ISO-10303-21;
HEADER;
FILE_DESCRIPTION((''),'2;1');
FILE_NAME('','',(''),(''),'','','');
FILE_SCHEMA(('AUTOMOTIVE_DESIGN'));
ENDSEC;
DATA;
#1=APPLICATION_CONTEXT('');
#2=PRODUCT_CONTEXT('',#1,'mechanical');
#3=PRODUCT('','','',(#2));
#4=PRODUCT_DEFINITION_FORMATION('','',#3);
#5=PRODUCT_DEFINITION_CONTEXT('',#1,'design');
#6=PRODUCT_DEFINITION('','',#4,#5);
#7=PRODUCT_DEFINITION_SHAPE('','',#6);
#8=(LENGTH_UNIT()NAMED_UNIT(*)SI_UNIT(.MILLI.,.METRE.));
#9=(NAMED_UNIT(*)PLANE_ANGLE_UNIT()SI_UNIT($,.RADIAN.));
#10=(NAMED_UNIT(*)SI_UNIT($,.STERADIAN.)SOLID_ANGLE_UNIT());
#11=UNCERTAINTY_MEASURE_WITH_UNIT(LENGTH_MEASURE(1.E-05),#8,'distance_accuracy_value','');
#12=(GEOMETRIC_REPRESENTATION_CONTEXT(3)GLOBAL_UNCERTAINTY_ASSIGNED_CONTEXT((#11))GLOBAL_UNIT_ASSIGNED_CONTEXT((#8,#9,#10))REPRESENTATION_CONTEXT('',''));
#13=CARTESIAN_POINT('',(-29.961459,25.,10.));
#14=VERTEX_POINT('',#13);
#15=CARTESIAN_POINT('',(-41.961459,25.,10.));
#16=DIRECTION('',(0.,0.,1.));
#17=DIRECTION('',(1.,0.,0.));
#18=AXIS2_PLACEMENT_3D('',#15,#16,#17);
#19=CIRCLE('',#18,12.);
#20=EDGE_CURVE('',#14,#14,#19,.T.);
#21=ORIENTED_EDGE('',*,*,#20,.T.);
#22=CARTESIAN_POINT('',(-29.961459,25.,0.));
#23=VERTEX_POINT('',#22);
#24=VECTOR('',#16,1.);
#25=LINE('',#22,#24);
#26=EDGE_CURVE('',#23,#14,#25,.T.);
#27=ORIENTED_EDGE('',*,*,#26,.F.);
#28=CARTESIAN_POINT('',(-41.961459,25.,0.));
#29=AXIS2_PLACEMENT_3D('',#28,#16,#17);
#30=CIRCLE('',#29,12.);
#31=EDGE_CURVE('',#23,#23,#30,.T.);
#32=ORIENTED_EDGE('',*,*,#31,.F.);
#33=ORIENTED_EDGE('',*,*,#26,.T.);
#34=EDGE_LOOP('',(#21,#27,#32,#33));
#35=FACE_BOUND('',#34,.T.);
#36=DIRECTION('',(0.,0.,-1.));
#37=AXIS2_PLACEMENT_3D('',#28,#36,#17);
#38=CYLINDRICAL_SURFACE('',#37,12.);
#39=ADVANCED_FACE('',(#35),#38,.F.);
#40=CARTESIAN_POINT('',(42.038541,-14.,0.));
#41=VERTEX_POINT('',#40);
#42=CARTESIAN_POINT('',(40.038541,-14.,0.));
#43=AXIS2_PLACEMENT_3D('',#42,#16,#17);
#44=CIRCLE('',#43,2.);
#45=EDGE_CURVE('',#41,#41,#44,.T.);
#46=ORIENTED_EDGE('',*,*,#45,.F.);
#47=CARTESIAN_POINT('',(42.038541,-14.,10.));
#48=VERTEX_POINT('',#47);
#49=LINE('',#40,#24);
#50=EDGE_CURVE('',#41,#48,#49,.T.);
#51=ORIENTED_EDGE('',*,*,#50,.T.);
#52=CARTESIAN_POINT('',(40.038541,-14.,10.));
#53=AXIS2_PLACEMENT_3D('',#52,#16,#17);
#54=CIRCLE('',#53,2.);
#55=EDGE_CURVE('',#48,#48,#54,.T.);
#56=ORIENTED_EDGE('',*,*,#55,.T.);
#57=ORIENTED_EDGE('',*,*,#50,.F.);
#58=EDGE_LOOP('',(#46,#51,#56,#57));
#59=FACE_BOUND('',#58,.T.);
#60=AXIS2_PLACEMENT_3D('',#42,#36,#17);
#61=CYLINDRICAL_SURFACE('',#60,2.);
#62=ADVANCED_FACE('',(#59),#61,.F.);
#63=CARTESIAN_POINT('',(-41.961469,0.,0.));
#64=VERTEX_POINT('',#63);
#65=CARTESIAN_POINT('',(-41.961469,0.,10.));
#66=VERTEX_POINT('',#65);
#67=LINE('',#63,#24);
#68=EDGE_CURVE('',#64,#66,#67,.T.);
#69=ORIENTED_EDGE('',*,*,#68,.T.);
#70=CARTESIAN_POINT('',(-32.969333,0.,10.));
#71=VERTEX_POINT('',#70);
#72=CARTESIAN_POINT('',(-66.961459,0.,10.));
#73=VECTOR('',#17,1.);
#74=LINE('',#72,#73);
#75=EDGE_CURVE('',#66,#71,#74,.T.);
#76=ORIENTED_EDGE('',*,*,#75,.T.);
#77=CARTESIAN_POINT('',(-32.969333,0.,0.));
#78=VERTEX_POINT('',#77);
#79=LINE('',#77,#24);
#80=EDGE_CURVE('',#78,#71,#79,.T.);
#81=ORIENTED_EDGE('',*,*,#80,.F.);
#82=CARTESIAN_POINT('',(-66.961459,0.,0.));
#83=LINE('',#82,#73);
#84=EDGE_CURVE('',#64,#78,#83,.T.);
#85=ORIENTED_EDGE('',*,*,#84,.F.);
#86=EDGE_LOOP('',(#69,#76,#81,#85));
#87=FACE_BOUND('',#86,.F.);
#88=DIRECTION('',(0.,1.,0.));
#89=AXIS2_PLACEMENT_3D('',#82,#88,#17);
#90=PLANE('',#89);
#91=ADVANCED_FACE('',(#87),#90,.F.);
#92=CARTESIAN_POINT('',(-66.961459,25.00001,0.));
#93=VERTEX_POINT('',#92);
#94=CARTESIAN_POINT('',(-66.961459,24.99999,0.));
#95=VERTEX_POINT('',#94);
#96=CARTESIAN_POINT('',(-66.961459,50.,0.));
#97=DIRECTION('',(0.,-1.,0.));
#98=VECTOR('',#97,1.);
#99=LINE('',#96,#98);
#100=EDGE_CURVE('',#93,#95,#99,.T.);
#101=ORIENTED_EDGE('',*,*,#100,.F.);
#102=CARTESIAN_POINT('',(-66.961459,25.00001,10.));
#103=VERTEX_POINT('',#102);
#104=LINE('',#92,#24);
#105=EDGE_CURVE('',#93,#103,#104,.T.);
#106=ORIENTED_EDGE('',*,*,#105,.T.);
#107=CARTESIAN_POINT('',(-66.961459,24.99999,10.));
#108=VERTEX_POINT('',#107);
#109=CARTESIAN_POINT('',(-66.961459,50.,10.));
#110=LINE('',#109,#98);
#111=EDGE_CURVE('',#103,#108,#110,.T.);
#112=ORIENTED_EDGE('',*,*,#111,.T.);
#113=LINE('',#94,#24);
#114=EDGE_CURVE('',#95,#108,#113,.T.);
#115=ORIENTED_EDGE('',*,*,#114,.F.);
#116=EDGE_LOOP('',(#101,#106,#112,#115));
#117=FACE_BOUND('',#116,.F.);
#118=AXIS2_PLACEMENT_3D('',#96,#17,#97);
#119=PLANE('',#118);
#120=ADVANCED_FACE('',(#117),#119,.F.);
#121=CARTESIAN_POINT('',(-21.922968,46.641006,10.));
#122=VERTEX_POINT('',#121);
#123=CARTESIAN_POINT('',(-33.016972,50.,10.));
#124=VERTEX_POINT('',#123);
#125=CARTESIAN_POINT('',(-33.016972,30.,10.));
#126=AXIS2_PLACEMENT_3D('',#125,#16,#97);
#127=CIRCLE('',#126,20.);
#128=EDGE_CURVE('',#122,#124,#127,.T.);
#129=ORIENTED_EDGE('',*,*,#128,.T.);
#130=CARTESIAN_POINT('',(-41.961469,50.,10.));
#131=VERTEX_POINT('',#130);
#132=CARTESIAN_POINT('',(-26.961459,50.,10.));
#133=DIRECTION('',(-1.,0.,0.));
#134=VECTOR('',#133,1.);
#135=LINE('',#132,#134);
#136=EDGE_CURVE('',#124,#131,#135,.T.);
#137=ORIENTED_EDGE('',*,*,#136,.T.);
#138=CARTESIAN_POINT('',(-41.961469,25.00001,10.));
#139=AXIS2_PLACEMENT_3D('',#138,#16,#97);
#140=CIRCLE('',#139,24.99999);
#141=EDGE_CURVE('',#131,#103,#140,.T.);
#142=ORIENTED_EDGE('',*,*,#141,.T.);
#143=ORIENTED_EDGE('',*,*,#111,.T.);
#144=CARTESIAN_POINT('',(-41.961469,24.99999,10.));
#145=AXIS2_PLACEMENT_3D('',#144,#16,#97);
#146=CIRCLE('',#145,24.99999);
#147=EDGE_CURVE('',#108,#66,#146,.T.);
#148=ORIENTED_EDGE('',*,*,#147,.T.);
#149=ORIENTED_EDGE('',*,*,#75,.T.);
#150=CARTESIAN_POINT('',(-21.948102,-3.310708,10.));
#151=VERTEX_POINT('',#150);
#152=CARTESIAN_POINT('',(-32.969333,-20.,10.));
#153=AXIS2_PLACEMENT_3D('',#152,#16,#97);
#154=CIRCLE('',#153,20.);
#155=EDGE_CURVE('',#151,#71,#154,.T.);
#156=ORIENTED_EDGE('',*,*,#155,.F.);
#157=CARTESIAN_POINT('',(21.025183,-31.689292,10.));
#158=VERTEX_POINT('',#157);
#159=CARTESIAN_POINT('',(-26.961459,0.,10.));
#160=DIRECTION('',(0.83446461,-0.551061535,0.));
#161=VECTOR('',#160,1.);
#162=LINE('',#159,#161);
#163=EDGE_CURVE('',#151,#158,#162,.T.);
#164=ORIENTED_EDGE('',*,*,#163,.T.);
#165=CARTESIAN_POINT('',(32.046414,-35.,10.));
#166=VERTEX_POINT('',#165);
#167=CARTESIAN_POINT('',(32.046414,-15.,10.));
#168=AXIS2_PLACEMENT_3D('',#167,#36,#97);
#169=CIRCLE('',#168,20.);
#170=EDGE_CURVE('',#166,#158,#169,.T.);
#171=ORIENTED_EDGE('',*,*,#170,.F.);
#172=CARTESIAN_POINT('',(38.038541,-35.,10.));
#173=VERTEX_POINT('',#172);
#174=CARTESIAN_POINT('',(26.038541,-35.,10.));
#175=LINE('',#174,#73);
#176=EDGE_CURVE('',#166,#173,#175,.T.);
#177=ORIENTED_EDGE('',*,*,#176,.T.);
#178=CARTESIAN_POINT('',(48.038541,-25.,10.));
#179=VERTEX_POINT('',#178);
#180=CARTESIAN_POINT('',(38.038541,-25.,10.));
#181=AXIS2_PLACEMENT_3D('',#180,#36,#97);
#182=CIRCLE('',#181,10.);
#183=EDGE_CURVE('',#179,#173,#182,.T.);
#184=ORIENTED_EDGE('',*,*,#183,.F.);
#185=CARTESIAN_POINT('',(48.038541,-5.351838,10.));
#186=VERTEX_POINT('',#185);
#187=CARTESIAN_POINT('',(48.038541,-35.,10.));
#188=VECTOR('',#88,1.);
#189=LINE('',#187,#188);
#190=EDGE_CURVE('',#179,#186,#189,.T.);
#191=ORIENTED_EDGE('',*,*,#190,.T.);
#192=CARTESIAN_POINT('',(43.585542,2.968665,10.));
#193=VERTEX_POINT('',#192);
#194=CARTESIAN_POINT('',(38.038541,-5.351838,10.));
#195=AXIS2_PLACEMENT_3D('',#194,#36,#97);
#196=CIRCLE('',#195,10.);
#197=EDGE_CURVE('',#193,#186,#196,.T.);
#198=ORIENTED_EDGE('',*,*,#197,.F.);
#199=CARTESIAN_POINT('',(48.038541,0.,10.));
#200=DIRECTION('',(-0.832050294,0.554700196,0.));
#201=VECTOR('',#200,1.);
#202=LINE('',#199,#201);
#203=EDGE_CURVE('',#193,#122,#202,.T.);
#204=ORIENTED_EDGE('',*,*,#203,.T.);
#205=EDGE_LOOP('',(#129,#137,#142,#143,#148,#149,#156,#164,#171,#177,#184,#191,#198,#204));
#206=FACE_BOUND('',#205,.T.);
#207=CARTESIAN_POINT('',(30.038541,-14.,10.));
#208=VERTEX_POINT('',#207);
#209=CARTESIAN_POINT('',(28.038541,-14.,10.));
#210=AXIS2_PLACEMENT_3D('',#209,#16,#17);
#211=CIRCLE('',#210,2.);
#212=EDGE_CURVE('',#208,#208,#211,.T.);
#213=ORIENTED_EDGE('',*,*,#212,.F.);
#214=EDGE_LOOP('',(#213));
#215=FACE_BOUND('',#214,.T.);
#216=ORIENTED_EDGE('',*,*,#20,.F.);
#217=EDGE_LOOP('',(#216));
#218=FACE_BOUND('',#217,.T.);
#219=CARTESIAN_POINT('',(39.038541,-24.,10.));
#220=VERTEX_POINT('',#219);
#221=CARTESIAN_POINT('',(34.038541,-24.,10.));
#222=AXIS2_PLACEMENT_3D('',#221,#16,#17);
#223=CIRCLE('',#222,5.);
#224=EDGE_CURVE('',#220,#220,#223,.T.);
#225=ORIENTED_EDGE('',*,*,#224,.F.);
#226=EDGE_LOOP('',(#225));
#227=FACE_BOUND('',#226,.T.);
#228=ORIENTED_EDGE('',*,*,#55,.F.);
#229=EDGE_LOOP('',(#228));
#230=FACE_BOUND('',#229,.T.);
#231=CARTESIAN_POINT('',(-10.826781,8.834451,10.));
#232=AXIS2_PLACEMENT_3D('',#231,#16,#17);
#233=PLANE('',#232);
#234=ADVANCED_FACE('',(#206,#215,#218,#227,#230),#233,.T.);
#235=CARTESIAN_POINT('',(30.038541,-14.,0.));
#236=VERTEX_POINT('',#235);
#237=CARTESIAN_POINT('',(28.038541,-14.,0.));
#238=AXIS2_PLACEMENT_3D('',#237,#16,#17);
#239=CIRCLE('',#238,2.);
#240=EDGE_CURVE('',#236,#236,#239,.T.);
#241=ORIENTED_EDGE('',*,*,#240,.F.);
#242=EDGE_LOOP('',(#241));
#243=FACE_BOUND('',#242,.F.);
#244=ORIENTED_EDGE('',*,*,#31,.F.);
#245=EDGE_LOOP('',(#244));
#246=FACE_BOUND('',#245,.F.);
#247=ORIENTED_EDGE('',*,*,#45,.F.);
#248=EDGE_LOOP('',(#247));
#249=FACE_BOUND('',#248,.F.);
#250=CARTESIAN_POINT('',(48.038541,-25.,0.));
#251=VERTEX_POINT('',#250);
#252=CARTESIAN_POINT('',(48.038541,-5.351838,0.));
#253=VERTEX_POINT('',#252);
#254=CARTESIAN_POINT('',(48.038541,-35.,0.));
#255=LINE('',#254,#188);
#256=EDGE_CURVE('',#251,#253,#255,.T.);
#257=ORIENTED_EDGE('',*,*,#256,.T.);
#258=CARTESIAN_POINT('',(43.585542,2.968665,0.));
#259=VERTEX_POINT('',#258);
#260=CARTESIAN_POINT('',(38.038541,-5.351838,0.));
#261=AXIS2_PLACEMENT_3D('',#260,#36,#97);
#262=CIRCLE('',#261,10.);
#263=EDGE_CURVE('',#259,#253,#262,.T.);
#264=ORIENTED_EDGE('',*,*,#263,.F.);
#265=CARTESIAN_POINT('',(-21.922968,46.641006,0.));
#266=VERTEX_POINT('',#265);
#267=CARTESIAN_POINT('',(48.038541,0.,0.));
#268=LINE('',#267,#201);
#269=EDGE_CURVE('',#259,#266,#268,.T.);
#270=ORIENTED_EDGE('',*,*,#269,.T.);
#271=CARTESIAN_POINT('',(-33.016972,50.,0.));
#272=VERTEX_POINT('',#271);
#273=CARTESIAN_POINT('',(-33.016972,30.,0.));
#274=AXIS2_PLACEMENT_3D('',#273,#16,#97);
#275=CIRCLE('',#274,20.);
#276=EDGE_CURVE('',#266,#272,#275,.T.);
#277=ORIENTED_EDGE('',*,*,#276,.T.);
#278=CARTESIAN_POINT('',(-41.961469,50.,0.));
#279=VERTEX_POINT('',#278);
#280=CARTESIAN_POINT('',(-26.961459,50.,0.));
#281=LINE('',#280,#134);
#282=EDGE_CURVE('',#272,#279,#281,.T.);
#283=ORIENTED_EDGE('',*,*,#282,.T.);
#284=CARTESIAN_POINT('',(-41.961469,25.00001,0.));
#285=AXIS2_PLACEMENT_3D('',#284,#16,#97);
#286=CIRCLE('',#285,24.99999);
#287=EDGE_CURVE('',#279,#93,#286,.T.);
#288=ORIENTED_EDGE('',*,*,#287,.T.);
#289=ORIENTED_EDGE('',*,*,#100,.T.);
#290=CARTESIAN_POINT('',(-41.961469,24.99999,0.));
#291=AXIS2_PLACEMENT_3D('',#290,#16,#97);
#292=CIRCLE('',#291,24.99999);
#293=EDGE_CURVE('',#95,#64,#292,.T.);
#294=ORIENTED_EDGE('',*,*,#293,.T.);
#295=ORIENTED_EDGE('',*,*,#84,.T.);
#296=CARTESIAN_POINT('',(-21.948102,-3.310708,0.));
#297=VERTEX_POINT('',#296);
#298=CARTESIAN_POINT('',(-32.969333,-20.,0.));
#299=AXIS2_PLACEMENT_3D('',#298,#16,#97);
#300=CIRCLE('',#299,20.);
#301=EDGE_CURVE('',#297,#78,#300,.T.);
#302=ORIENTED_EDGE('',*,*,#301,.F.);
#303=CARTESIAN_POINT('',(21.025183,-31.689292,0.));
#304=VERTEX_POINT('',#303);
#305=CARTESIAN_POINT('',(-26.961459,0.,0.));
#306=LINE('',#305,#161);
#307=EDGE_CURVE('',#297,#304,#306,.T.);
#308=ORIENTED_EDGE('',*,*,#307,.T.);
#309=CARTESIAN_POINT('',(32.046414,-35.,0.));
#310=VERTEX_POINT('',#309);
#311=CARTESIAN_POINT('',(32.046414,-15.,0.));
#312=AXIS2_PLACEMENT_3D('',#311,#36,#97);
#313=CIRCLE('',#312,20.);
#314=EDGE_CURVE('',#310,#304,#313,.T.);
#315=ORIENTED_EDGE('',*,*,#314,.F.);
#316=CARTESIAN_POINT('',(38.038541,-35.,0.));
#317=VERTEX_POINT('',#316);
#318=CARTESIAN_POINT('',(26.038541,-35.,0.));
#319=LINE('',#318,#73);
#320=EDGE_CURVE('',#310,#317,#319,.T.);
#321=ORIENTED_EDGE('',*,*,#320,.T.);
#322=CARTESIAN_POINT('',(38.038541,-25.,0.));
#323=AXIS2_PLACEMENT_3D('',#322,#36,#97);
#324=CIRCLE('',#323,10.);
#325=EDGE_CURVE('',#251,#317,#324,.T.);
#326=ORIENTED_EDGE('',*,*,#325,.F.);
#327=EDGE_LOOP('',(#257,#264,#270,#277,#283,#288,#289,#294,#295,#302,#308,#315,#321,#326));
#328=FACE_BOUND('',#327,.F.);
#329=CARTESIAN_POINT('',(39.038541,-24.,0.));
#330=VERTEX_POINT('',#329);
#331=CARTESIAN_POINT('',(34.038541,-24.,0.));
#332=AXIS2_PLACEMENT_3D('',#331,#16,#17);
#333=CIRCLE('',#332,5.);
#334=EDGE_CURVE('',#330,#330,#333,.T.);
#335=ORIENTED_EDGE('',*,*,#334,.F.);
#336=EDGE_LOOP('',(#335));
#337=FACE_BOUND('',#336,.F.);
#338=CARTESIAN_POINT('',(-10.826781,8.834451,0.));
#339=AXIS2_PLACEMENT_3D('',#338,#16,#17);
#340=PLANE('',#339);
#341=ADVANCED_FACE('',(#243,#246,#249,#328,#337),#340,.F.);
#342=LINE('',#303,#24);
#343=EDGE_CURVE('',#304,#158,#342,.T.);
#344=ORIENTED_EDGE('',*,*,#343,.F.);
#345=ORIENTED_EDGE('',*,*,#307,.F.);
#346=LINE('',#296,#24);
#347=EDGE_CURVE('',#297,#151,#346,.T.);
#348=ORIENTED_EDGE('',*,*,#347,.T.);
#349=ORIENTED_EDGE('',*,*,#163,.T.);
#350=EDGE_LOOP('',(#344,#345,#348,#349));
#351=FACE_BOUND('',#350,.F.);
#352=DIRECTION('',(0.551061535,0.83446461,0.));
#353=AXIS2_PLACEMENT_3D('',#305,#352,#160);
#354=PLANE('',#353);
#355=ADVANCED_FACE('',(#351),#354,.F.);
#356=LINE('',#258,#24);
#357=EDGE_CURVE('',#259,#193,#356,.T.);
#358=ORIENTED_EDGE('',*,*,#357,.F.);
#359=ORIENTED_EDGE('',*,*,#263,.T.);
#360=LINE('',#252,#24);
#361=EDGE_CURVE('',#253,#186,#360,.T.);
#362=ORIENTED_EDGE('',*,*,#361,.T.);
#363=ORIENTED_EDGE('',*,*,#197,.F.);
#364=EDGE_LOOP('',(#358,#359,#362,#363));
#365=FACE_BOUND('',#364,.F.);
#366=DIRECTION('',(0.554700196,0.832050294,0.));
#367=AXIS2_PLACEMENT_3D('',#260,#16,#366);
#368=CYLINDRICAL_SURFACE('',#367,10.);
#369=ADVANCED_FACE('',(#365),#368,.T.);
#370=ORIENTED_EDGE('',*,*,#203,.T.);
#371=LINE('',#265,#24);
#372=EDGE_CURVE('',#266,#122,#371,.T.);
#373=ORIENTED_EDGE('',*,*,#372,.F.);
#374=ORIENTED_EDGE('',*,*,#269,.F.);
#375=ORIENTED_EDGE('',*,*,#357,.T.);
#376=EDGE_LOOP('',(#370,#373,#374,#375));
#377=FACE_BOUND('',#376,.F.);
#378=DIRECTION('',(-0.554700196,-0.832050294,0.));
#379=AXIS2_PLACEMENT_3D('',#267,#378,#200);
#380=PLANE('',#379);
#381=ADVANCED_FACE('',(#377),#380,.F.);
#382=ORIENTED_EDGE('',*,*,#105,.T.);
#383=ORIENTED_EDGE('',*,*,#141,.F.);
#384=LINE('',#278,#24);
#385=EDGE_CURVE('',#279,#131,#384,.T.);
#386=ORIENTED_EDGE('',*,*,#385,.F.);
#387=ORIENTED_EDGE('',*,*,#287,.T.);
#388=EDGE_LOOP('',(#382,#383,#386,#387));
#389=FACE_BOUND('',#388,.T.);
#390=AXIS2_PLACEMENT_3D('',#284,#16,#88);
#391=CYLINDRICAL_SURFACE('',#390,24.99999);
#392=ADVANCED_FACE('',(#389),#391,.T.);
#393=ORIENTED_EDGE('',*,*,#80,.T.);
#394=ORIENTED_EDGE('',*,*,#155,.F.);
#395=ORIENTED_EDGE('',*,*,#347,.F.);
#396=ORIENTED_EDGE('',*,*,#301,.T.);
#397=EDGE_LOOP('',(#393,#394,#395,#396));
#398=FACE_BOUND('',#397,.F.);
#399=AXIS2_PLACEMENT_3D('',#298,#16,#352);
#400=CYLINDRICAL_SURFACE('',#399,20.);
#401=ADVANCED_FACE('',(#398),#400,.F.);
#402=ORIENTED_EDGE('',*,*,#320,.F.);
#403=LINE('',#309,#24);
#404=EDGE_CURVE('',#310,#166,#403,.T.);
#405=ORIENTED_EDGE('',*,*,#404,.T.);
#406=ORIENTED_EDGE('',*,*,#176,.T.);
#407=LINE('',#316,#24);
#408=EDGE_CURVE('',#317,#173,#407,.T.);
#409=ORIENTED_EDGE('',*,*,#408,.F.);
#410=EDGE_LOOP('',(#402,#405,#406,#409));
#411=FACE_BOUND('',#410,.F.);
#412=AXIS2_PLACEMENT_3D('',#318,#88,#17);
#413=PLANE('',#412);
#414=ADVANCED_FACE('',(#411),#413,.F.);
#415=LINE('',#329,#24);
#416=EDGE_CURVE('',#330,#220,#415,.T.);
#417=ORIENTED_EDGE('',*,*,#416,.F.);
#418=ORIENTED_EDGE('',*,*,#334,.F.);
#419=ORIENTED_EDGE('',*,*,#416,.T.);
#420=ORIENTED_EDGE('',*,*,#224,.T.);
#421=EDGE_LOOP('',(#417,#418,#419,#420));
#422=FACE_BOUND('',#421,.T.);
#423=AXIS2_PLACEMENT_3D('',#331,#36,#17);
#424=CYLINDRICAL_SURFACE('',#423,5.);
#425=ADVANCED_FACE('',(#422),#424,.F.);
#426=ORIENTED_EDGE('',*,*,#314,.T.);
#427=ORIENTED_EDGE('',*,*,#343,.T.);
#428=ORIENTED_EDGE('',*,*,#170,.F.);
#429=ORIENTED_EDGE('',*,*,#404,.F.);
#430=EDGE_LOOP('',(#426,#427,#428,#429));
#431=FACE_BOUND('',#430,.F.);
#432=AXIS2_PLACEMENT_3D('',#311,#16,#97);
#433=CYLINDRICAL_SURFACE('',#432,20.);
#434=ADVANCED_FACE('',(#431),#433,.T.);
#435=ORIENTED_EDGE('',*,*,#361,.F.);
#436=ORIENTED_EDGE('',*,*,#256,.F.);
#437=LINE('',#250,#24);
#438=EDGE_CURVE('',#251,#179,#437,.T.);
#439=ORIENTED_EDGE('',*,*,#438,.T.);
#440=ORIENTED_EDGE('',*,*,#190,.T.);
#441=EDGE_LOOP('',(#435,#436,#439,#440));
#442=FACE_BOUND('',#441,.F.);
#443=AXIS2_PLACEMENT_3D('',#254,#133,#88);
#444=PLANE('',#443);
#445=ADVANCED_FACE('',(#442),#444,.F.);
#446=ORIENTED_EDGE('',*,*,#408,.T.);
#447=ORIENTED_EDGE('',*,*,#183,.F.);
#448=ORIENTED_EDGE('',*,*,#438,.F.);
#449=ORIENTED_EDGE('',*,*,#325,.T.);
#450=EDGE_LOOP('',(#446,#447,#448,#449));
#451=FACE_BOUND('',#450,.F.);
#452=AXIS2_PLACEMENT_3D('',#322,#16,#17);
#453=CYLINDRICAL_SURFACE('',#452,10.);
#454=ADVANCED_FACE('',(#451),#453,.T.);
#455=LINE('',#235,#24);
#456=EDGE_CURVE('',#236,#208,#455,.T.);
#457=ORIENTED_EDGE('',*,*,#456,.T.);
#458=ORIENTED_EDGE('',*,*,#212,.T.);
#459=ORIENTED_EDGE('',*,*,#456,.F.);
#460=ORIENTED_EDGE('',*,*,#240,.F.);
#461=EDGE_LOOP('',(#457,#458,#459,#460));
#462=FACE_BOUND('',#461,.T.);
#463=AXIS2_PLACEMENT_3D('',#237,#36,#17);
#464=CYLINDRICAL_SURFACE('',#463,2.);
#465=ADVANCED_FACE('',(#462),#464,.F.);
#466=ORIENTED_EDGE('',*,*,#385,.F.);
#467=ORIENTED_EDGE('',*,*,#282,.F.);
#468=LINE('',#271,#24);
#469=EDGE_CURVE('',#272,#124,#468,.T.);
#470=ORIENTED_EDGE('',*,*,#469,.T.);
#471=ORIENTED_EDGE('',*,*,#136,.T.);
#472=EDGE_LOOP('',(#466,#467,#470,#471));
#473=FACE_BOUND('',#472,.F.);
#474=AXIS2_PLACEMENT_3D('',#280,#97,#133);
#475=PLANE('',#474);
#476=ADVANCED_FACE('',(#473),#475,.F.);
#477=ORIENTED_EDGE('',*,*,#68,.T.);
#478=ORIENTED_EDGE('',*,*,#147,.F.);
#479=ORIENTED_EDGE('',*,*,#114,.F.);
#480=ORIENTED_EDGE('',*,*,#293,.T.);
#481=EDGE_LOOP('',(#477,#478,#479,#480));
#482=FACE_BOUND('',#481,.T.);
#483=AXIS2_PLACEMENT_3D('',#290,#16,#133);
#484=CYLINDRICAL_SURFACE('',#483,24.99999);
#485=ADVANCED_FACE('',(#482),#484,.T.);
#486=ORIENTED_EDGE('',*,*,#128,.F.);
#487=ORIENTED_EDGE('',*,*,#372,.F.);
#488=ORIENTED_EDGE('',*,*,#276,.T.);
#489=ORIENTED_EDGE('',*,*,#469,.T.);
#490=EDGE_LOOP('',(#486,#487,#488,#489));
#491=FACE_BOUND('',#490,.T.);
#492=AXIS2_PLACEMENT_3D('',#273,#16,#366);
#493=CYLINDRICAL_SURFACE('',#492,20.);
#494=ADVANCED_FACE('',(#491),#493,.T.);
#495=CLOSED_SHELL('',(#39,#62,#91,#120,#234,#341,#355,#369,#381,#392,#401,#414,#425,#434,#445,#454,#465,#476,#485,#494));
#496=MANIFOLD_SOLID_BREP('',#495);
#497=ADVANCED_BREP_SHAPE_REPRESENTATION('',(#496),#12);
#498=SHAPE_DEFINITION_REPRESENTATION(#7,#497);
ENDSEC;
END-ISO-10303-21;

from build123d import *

# Parameters (mm, degrees)
F0_R     = 2
F0_R_2   = 5
F0_R_3   = 12
F1_DEPTH = 10
F2_R     = 24.99999
F3_R     = 10
F4_R     = 20


# Not quite as in the source:
# - a fillet or chamfer is up to 0.001 mm smaller than in the source, because OpenCascade refuses the exact size


with BuildPart() as f1:
    # F0 (on Top) → F1 (new body)
    with BuildSketch(Plane.XY):
        Polygon((-26.9614594782, 50), (-66.9614594782, 50), (-66.9614594782, 0), (-26.9614594782, 0), (26.0385405218, -35), (48.0385405218, -35), (48.0385405218, 0), align=None)
        with Locations((28.0385405218, -14)):
            Circle(F0_R, mode=Mode.SUBTRACT)
        with Locations((34.0385405218, -24)):
            Circle(F0_R_2, mode=Mode.SUBTRACT)
        with Locations((40.0385405218, -14)):
            Circle(F0_R, mode=Mode.SUBTRACT)
        with Locations((-41.9614594782, 25)):
            Circle(F0_R_3, mode=Mode.SUBTRACT)
    extrude(amount=F1_DEPTH)

    # F2 (radius 25 in the source; OpenCascade refuses exactly that, so slightly less here)
    f2_edges = [f1.edges().sort_by_distance(p)[0] for p in [
        (-66.961459, 50, 5),
        (-66.961459, 0, 5),
    ]]
    fillet(f2_edges, radius=F2_R)

    # F3
    f3_edges = [f1.edges().sort_by_distance(p)[0] for p in [
        (48.038541, -35, 5),
        (48.038541, 0, 5),
    ]]
    fillet(f3_edges, radius=F3_R)

    # F4
    f4_edges = [f1.edges().sort_by_distance(p)[0] for p in [
        (-26.961459, 50, 5),
        (-26.961459, 0, 5),
        (26.038541, -35, 5),
    ]]
    fillet(f4_edges, radius=F4_R)


solid = f1.part
